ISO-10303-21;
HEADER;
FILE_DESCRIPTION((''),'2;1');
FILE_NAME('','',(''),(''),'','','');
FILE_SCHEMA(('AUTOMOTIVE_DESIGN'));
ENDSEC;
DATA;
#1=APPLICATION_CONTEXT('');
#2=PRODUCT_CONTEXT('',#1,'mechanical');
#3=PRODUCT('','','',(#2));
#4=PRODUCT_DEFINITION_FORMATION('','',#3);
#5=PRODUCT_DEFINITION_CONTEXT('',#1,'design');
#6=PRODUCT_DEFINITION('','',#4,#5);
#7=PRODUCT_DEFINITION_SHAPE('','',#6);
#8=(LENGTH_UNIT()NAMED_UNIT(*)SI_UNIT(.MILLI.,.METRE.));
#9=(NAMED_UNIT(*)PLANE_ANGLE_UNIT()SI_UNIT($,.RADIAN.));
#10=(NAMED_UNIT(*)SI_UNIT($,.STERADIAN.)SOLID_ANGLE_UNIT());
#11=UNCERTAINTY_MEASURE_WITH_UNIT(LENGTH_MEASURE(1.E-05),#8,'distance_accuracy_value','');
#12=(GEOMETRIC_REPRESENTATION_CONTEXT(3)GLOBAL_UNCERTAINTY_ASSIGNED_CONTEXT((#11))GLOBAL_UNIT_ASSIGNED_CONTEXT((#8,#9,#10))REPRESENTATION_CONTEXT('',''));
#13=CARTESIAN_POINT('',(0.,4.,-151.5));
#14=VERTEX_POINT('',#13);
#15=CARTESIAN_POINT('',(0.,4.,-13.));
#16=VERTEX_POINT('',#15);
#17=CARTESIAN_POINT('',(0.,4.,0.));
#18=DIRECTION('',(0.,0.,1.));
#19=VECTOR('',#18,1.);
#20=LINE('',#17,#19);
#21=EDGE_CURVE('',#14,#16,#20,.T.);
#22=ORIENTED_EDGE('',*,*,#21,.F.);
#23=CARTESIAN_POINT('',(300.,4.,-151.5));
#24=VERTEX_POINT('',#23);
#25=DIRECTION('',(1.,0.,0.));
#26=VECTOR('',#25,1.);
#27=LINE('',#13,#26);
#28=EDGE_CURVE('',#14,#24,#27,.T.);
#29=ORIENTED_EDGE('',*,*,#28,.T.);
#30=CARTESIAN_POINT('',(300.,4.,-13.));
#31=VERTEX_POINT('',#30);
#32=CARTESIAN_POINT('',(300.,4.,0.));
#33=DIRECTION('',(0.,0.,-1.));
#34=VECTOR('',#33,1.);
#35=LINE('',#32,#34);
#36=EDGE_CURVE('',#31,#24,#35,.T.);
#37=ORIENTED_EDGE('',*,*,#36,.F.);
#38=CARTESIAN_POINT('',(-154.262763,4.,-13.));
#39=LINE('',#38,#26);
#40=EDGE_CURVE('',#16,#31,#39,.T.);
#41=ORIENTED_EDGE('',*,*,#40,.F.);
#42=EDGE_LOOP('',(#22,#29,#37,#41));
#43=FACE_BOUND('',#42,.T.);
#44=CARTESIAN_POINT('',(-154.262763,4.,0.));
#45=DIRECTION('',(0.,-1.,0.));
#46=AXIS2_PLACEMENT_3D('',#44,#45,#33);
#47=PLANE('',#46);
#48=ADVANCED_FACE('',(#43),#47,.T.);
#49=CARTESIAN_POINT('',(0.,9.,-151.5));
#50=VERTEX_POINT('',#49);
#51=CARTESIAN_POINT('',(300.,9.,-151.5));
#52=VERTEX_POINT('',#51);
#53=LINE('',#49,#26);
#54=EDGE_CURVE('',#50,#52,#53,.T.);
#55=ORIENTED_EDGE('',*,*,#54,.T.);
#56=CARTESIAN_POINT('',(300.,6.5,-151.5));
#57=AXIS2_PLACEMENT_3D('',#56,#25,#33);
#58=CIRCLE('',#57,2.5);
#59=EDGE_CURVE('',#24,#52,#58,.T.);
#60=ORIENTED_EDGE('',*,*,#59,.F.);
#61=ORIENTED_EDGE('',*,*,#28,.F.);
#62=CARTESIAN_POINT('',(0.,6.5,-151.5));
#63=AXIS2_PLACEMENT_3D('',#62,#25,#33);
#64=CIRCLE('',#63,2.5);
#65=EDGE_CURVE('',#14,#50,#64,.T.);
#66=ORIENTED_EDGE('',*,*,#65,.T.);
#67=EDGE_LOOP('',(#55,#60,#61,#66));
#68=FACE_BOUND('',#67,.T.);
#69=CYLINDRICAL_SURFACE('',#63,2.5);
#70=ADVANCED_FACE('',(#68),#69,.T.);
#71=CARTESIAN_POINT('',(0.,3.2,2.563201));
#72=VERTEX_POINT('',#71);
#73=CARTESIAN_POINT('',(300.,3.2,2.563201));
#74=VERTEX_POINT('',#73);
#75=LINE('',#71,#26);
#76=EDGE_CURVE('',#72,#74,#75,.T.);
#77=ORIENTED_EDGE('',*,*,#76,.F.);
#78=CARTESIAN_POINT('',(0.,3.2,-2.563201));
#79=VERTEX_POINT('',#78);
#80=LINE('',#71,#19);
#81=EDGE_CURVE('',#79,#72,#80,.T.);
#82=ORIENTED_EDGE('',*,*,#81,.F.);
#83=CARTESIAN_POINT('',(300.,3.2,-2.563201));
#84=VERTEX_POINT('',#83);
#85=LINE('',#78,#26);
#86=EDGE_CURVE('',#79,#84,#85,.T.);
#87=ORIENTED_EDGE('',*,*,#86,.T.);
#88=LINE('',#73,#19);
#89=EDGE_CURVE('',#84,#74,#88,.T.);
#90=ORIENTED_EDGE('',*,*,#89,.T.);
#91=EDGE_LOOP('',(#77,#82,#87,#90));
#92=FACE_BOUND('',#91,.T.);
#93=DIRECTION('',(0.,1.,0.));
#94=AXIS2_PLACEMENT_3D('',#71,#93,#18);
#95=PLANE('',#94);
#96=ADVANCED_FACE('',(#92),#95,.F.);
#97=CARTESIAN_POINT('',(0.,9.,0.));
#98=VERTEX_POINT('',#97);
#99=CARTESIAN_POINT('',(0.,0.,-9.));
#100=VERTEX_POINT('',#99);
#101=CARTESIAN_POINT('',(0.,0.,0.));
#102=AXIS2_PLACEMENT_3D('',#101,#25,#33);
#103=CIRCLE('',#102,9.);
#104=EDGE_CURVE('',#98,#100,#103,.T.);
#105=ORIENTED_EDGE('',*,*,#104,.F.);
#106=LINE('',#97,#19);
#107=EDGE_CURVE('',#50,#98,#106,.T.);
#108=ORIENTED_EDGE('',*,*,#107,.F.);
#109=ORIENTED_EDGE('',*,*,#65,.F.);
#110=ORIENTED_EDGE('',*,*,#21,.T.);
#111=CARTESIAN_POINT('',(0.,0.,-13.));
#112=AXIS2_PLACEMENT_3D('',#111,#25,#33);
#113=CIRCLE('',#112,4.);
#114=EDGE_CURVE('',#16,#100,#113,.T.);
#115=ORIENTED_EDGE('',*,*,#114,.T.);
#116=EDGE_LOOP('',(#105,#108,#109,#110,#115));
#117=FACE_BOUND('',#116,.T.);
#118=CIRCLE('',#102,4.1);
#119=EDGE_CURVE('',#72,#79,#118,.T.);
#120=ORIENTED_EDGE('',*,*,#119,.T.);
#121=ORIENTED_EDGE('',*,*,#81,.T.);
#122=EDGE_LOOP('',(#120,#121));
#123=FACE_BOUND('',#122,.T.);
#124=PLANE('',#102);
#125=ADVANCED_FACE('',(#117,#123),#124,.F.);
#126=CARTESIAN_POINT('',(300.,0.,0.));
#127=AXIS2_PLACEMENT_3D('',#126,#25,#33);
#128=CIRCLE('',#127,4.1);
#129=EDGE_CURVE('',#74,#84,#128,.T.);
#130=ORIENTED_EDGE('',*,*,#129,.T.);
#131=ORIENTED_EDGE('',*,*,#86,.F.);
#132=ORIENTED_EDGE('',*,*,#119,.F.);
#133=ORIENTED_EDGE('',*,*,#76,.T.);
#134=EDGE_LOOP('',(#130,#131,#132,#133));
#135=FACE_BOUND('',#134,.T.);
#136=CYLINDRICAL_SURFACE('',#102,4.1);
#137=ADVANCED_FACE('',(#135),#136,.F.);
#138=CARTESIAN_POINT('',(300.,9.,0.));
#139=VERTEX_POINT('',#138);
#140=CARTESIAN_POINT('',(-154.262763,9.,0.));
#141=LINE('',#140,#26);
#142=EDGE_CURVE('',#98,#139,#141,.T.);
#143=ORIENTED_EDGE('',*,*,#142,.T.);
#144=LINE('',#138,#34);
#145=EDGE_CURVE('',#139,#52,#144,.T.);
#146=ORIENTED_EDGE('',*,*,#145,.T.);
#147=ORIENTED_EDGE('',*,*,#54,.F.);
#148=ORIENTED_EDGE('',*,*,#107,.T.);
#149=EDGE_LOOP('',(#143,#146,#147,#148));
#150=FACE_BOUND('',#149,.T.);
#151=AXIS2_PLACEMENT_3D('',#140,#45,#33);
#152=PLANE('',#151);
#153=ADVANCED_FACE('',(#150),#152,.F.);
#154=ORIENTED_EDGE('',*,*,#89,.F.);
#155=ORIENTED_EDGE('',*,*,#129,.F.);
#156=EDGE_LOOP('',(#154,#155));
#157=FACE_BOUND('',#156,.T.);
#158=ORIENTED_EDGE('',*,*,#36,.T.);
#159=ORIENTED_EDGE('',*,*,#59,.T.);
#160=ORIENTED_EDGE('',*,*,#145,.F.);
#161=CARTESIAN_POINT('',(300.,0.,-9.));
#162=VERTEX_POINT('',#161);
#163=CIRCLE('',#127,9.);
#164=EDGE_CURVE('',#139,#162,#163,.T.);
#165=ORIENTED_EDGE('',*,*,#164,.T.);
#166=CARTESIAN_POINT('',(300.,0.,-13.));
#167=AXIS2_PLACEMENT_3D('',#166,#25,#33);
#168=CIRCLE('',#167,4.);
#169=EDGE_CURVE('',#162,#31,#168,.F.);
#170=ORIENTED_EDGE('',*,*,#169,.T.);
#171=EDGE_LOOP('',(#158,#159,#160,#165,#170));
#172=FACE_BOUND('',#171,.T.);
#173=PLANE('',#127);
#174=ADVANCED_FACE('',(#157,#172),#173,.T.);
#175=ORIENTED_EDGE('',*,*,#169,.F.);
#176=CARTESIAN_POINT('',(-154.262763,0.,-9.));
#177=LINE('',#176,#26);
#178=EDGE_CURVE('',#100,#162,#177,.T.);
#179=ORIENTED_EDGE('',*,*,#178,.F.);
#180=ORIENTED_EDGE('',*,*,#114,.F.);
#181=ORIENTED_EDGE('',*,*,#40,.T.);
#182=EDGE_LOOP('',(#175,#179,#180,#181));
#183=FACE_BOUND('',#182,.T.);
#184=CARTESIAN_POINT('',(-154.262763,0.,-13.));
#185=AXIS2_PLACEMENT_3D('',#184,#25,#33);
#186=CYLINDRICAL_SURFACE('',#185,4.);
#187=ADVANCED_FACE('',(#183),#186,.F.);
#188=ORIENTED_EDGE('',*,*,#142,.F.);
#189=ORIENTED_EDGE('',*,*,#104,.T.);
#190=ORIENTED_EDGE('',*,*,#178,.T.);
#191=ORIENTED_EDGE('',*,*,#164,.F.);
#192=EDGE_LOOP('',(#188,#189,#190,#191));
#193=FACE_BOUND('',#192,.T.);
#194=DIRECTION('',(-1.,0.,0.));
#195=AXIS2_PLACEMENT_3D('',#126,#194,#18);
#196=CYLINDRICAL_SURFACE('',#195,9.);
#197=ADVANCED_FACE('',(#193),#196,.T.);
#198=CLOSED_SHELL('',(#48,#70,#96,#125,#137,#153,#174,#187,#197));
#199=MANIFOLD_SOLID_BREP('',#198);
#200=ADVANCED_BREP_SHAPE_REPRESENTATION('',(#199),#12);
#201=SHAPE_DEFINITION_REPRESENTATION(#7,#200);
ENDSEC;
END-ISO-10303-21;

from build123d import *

# Parameters (mm, degrees)
SKETCH1_R               = 9
BOSS_EXTRUDE1_DEPTH     = 300
CUT_EXTRUDE1_DEPTH      = 301.269878609
CUT_EXTRUDE1_DEPTH_BACK = 301.269878609
BOSS_EXTRUDE2_START     = -300
BOSS_EXTRUDE2_DEPTH     = 300
CUT_EXTRUDE2_START      = -300
CUT_EXTRUDE2_DEPTH      = 300


# Read off the part's stored shape, not the designer's step: Cut-Extrude2
with BuildPart() as part:
    # Sketch1 → Boss-Extrude1 (new body)
    with BuildSketch(Plane(origin=(0, 0, 0), x_dir=(0, 0, -1), z_dir=(1, 0, 0))):
        Circle(SKETCH1_R)
    extrude(amount=BOSS_EXTRUDE1_DEPTH)

    # Sketch2 → Cut-Extrude1 (cut, two sides: drawn at the far end of the back side and taken through both)
    with BuildSketch(Plane(origin=(300, 0, 0), x_dir=(0, 0, -1), z_dir=(1, 0, 0)).offset(-CUT_EXTRUDE1_DEPTH_BACK)):
        with BuildLine():
            Line((-2.563201124, 3.2), (2.563201124, 3.2))
            ThreePointArc((2.563201124, 3.2), (0, -4.1), (-2.563201124, 3.2))
        make_face()
    extrude(amount=CUT_EXTRUDE1_DEPTH + CUT_EXTRUDE1_DEPTH_BACK, mode=Mode.SUBTRACT)

    # Sketch3 → Boss-Extrude2 (add)
    with BuildSketch(Plane(origin=(300, 0, 0), x_dir=(0, 0, -1), z_dir=(1, 0, 0)).offset(BOSS_EXTRUDE2_START)):
        with BuildLine():
            ThreePointArc((8.062257748, 4), (8.762428879, 2.054224947), (9, 0))
            ThreePointArc((9, 0), (10.171572875, 2.828427125), (13, 4))
            Line((13, 4), (8.062257748, 4))
        make_face()
        with BuildLine():
            ThreePointArc((5, 4), (7.828427125, 2.828427125), (9, 0))
            ThreePointArc((9, 0), (8.762428879, 2.054224947), (8.062257748, 4))
            Line((8.062257748, 4), (5, 4))
        make_face()
        with BuildLine():
            Line((154, 9), (0, 9))
            ThreePointArc((0, 9), (4.74341649, 7.64852927), (8.062257748, 4))
            Line((8.062257748, 4), (13, 4))
            Line((13, 4), (154, 4))
            Line((154, 4), (154, 9))
        make_face()
        with BuildLine():
            ThreePointArc((8.062257748, 4), (4.74341649, 7.64852927), (0, 9))
            Line((0, 9), (0, 4))
            Line((0, 4), (5, 4))
            Line((5, 4), (8.062257748, 4))
        make_face()
    extrude(amount=BOSS_EXTRUDE2_DEPTH)

    # Cut-Extrude2 outline → Cut-Extrude2 (cut)
    with BuildSketch(Plane(origin=(300, 0, 0), x_dir=(0, 0, -1), z_dir=(1, 0, 0)).offset(CUT_EXTRUDE2_START)):
        with BuildLine():
            ThreePointArc((151.5, 9), (153.267766953, 8.267766953), (154, 6.5))
            Line((154, 6.5), (154, 9))
            Line((154, 9), (151.5, 9))
        make_face()
        with BuildLine():
            ThreePointArc((154, 6.5), (153.267766953, 4.732233047), (151.5, 4))
            Line((151.5, 4), (154, 4))
            Line((154, 4), (154, 6.5))
        make_face()
    extrude(amount=CUT_EXTRUDE2_DEPTH, mode=Mode.SUBTRACT)


solid = part.part
